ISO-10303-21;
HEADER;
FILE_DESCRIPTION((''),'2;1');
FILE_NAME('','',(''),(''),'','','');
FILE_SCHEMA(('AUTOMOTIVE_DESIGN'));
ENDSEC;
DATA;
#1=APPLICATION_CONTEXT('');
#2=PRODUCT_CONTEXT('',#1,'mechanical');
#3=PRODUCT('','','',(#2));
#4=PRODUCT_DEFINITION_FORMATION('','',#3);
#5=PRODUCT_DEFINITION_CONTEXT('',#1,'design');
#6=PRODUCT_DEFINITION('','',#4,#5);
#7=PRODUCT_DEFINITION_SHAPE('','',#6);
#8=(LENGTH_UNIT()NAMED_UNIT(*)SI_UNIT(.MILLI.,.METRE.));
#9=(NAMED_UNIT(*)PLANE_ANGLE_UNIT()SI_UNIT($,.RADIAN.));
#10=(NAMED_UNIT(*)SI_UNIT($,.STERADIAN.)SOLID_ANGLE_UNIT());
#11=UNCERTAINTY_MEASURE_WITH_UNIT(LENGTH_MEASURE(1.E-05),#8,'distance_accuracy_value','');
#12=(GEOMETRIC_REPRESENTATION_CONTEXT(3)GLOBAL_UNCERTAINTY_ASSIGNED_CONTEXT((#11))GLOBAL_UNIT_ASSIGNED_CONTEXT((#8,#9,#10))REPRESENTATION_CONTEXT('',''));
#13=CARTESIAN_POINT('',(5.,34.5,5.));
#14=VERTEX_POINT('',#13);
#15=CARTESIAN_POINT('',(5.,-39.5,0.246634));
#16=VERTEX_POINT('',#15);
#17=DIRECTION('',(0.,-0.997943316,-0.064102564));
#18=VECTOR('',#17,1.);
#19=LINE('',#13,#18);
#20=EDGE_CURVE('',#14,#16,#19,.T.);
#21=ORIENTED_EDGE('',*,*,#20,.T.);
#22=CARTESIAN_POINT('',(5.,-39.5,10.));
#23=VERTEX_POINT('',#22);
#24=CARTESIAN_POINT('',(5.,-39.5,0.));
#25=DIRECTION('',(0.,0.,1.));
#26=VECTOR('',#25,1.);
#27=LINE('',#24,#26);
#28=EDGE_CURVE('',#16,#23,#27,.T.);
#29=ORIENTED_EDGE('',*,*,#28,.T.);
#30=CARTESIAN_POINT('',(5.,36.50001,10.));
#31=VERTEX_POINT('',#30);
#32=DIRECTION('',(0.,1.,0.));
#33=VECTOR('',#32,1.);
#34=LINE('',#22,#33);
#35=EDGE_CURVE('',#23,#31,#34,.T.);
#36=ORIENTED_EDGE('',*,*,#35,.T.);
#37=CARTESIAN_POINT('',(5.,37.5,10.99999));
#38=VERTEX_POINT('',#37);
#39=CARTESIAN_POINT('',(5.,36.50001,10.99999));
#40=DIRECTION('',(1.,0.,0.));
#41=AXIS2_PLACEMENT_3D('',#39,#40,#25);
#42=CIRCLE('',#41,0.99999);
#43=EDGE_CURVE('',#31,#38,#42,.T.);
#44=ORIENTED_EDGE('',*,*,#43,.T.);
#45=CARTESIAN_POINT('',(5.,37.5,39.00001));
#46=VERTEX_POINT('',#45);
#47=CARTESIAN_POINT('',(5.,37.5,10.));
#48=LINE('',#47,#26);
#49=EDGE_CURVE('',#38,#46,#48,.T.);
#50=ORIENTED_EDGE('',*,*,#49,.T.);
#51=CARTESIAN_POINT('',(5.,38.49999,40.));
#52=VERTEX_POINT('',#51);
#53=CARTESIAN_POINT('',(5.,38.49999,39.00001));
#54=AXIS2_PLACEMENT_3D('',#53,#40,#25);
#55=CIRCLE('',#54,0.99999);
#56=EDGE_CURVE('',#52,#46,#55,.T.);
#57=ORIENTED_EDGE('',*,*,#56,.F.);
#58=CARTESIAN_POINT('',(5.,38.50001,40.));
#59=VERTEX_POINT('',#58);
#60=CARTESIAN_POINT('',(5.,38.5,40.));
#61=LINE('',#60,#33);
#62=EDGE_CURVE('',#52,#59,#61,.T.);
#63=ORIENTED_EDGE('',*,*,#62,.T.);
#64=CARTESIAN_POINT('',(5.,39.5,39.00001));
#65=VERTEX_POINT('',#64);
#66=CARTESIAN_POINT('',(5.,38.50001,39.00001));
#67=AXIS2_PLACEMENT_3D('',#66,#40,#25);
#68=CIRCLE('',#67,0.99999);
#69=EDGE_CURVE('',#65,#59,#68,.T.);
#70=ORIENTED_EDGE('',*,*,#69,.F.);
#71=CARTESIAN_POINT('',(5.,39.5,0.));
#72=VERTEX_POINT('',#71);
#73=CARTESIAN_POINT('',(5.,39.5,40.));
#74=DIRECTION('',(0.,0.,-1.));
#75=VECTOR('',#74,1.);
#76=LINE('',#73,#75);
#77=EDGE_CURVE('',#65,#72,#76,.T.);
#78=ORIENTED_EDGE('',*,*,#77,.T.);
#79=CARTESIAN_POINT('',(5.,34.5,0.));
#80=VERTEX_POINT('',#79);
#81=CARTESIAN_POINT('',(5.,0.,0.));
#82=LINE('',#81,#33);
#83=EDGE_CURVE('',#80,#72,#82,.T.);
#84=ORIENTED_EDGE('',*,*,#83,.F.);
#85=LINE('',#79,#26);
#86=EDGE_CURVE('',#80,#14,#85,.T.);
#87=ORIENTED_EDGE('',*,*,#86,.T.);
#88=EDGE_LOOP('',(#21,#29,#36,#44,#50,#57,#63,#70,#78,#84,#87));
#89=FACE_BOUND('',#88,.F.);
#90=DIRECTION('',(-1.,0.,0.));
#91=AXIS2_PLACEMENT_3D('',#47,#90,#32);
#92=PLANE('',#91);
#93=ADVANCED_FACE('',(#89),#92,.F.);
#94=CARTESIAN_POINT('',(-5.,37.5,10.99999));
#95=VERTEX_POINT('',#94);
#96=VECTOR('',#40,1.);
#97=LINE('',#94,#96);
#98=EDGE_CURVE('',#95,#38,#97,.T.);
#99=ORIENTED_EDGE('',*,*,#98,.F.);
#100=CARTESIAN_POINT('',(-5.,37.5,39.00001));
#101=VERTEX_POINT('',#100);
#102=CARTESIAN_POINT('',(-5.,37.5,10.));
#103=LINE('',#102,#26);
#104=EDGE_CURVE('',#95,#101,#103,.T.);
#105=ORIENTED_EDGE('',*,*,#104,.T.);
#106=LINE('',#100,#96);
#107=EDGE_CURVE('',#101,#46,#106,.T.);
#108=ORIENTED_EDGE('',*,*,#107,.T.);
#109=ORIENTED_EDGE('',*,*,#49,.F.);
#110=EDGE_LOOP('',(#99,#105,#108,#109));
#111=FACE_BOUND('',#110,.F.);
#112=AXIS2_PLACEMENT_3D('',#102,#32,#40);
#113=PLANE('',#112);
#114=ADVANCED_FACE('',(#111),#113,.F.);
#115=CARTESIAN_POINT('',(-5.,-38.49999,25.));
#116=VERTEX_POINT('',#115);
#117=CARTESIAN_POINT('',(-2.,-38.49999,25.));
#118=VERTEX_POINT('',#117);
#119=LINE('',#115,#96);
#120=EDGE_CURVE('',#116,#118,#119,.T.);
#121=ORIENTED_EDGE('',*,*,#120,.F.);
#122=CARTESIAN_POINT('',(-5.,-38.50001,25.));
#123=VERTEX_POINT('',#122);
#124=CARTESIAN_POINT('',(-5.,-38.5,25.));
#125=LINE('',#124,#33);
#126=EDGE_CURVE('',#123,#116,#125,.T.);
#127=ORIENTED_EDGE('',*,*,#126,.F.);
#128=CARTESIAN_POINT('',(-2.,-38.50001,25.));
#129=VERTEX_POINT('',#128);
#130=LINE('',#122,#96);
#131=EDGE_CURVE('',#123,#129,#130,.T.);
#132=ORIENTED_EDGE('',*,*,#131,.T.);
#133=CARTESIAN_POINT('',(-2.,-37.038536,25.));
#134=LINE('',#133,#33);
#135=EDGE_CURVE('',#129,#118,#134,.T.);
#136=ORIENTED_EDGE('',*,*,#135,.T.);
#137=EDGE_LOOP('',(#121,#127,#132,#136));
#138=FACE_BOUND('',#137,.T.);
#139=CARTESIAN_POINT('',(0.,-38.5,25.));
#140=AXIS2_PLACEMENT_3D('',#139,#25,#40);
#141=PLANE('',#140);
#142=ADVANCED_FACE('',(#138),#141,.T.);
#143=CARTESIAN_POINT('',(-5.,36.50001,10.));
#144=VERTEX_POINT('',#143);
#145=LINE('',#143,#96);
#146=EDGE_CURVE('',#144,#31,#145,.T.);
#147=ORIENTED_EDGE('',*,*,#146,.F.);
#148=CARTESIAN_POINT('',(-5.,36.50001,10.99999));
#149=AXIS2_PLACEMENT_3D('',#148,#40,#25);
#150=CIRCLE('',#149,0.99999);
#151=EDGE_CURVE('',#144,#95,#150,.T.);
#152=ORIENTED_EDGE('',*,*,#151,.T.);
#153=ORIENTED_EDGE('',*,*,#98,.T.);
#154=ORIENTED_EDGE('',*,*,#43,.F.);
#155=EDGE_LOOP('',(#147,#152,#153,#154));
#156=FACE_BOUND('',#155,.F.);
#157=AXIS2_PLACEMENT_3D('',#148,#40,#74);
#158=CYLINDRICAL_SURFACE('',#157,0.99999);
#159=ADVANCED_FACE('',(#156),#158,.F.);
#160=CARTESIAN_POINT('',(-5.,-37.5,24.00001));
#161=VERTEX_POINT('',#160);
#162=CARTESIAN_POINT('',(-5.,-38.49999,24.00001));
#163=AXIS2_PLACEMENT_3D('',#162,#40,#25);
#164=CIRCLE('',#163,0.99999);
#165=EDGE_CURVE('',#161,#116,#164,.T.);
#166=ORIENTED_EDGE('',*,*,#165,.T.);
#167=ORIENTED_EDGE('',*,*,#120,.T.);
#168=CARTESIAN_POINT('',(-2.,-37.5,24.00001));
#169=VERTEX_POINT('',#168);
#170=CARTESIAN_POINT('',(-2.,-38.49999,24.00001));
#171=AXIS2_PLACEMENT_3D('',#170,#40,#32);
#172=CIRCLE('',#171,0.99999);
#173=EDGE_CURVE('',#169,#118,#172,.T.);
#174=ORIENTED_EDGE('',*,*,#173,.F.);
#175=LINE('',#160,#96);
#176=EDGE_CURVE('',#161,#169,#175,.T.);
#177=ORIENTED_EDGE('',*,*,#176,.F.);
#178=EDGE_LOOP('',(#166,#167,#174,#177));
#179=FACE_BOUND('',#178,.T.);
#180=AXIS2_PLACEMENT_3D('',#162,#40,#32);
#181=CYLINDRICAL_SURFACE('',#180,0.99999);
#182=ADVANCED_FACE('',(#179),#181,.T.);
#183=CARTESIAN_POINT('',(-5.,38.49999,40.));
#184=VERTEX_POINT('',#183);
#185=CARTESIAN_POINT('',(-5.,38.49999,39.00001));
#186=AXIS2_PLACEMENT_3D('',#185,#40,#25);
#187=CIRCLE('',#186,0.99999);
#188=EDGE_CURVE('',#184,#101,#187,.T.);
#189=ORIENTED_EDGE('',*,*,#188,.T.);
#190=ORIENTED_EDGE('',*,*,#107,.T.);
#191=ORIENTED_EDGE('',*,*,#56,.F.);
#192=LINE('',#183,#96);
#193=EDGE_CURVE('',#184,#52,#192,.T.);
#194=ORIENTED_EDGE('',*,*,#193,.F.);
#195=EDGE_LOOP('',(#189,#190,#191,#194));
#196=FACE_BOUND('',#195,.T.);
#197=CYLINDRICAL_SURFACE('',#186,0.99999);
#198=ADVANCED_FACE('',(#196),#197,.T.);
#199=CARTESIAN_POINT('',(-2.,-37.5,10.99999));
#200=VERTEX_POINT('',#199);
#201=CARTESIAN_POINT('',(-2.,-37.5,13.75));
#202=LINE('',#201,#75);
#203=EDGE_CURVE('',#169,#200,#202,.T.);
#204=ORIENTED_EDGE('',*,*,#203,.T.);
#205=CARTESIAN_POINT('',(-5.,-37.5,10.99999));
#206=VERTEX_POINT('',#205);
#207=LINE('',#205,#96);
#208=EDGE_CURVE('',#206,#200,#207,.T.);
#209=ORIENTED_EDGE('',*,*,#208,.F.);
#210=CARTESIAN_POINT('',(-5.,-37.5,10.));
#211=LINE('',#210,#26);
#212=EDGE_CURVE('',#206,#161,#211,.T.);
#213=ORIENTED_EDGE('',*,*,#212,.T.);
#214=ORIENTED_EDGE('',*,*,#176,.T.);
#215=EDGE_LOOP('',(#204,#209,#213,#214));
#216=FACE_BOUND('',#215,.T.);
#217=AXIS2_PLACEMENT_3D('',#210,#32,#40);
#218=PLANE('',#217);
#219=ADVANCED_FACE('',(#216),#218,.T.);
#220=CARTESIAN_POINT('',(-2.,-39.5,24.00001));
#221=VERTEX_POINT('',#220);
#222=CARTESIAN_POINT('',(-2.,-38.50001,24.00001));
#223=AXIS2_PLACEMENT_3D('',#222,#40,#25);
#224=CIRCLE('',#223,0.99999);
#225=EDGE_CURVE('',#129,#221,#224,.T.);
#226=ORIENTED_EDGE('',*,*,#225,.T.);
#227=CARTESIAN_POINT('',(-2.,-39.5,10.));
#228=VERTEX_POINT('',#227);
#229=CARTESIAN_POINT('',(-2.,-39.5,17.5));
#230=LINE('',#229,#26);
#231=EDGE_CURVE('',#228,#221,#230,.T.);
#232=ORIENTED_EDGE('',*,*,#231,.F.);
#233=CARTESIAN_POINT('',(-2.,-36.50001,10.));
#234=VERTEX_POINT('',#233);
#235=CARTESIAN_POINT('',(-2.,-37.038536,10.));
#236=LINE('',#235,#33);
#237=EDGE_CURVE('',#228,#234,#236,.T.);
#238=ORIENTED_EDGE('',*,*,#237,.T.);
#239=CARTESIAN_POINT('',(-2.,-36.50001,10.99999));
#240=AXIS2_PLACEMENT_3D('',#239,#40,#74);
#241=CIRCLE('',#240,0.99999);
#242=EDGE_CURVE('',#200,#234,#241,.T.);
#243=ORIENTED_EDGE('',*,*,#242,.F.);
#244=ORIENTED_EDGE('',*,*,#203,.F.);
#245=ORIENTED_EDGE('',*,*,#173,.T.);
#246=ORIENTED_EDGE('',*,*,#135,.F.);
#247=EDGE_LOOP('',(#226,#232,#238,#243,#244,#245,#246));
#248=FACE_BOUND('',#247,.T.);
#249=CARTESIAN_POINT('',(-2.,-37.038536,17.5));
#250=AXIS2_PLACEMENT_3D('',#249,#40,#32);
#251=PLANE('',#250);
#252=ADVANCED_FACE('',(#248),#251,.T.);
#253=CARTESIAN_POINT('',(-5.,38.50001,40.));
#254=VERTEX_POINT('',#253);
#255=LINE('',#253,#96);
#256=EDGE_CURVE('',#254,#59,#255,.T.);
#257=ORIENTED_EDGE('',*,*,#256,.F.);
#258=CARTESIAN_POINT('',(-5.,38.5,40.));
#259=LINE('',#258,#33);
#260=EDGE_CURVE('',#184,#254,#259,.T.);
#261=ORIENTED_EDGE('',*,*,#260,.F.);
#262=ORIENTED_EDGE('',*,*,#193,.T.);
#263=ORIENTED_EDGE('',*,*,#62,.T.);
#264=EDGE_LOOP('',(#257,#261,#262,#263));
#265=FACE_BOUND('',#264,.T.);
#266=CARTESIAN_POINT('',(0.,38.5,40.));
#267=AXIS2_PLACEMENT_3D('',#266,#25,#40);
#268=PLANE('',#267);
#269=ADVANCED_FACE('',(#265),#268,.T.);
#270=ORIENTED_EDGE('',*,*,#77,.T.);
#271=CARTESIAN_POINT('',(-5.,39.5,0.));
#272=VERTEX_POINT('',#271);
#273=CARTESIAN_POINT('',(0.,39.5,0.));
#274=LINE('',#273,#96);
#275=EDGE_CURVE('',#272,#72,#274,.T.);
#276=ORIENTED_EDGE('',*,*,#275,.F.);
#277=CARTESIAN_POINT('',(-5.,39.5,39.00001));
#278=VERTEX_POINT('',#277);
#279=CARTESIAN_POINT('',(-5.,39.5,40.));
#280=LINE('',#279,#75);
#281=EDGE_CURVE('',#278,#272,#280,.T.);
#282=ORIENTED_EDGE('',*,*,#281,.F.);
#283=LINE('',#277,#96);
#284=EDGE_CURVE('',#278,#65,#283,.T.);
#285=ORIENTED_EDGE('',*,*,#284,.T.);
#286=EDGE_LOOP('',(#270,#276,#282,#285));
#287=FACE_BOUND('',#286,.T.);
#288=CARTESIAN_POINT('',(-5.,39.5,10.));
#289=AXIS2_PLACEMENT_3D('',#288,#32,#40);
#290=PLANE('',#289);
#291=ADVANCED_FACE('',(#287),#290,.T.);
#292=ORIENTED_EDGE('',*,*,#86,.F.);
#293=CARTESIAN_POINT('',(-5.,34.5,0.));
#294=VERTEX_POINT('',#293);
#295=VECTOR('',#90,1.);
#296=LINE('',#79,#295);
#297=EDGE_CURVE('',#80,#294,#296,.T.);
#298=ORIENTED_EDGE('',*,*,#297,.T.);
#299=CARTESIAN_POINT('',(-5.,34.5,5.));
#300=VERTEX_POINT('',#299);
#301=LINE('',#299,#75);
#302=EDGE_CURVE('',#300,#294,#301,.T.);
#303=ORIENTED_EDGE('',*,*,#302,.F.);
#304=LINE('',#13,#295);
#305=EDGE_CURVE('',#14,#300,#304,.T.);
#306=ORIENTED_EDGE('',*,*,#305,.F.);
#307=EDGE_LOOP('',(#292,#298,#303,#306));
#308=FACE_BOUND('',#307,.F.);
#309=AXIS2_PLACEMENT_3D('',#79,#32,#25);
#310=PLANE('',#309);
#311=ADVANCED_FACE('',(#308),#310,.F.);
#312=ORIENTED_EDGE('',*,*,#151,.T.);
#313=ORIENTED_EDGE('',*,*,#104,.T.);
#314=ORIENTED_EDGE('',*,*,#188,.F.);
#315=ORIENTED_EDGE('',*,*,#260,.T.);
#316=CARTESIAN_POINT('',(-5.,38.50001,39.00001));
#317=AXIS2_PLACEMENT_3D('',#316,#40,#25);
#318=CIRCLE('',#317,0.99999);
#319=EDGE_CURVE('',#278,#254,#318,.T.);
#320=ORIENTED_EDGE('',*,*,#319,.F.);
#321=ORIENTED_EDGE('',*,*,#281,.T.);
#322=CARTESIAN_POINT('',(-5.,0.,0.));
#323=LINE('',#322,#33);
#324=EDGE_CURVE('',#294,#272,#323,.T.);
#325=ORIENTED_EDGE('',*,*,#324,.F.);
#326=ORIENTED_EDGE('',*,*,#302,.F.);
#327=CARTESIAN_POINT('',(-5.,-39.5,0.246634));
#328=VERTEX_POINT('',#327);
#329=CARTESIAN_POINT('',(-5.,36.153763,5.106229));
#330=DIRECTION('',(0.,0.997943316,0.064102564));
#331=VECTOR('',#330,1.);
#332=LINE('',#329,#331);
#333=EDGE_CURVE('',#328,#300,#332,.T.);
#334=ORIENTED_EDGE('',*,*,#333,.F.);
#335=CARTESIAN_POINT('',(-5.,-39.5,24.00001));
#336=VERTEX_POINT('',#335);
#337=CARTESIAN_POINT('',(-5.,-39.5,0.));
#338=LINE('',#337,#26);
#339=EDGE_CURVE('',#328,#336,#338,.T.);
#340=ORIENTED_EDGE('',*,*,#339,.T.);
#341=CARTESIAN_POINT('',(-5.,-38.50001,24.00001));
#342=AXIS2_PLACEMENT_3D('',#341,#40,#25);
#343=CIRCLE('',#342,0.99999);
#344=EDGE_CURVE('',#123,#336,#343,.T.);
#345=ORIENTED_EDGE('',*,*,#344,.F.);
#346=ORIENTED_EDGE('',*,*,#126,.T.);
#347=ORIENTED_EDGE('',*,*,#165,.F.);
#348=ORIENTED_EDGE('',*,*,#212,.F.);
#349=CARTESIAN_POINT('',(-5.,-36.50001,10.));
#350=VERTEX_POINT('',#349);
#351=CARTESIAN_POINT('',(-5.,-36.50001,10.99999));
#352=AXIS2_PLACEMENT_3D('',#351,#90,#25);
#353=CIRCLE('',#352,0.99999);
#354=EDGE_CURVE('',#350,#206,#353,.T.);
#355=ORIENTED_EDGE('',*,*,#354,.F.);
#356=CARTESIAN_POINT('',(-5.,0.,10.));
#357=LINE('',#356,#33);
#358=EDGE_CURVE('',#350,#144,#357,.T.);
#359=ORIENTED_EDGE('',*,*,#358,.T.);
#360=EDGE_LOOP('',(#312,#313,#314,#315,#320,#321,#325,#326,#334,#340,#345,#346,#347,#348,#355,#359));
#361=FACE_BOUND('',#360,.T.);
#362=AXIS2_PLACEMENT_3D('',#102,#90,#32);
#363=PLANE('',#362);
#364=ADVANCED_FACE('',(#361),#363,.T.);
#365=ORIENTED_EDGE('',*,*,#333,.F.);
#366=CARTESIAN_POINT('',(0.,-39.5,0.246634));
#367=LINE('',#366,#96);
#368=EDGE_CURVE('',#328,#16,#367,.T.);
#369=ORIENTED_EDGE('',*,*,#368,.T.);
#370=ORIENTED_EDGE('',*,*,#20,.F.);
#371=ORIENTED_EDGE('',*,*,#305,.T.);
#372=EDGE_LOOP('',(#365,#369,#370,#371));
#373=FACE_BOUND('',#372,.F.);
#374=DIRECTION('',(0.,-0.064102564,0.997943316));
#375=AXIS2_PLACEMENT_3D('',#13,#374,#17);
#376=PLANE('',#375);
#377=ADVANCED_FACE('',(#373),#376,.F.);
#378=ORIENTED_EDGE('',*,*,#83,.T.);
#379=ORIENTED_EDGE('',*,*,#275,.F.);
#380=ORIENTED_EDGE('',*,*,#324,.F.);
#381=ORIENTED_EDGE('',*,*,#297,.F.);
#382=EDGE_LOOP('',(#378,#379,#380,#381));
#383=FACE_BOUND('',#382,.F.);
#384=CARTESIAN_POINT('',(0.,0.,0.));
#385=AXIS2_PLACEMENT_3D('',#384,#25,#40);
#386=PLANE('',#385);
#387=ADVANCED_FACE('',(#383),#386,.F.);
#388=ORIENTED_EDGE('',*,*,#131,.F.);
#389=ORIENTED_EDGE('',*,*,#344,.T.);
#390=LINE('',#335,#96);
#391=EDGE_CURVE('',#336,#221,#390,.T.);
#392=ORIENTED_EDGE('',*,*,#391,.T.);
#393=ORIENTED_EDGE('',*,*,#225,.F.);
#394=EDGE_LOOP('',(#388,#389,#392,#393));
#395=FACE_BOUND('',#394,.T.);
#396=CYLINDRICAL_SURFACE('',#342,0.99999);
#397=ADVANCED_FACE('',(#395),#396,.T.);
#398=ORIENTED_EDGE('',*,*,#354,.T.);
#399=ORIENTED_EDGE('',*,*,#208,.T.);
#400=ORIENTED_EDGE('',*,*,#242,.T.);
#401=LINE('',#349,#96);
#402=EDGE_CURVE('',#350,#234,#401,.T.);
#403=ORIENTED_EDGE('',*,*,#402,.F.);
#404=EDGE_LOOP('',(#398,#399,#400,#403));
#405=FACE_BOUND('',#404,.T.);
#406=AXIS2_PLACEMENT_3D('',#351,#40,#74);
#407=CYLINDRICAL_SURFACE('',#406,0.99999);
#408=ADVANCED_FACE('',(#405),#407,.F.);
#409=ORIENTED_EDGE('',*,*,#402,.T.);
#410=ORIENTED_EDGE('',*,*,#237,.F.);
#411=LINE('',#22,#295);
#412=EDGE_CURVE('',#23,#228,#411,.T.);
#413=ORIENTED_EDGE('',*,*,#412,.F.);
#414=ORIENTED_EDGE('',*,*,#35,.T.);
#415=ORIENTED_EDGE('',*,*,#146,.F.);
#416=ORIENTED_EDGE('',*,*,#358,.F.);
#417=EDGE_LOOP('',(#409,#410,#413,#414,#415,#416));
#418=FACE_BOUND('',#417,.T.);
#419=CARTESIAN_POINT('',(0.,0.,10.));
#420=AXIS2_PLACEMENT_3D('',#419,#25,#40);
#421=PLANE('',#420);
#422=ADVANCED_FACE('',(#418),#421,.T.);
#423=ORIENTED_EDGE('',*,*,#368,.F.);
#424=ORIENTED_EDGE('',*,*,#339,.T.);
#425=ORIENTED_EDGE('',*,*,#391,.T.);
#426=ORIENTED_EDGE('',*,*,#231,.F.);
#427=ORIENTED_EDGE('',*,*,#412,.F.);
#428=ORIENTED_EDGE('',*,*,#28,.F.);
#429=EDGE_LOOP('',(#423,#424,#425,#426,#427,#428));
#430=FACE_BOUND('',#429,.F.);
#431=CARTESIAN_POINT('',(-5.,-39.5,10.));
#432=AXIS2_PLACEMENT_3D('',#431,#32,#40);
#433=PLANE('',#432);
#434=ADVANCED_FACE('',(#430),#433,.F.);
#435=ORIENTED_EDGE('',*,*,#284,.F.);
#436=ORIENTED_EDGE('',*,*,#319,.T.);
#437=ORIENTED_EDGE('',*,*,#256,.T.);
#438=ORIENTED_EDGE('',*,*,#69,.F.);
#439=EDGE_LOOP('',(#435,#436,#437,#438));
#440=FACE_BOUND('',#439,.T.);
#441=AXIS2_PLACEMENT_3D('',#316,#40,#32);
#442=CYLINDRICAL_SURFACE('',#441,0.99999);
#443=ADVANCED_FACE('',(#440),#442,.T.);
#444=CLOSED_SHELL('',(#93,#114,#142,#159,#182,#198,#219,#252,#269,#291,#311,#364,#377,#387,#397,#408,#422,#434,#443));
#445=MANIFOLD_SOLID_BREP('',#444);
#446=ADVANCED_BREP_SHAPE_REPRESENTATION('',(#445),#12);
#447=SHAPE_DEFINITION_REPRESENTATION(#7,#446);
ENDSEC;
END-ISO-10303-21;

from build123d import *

# Parameters (mm, degrees)
F0_W      = 10
F0_H      = 79
F1_DEPTH  = 10
F2_W      = 10
F2_H      = 2
F3_DEPTH  = 15
F4_W      = 10
F4_H      = 2
F5_DEPTH  = 30
F7_DEPTH  = 10.001
F8_R      = 0.99999
F9_W      = 4.9229283333
F9_H      = 15
F10_DEPTH = 7


# Not quite as in the source:
# - a fillet or chamfer is up to 0.001 mm smaller than in the source, because OpenCascade refuses the exact size


with BuildPart() as f1:
    # F0 (on Top) → F1 (new body)
    with BuildSketch(Plane.XY):
        Rectangle(F0_W, F0_H)
    extrude(amount=F1_DEPTH)

    # F2 (on face) → F3 (join)
    with BuildSketch(Plane.XY.offset(10)):
        with Locations((0, -38.5)):
            Rectangle(F2_W, F2_H)
    extrude(amount=F3_DEPTH)

    # F4 (on face) → F5 (join)
    with BuildSketch(Plane.XY.offset(10)):
        with Locations((0, 38.5)):
            Rectangle(F4_W, F4_H)
    extrude(amount=F5_DEPTH)

    # F6 (on face) → F7 (cut, through all)
    with BuildSketch(Plane.YZ.offset(5)):
        Polygon((34.5, 5), (-43.3395786217, 0), (34.5, 0), align=None)
    extrude(amount=-F7_DEPTH, mode=Mode.SUBTRACT)

    # F8 (radius 1 in the source; OpenCascade refuses exactly that, so slightly less here)
    f8_edges = [f1.edges().sort_by_distance(p)[0] for p in [
        (0, -39.5, 25),
        (0, -37.5, 25),
        (0, 37.5, 40),
        (0, 39.5, 40),
        (0, -37.5, 10),
        (0, 37.5, 10),
    ]]
    fillet(f8_edges, radius=F8_R)

    # F9 (on face) → F10 (cut)
    with BuildSketch(Plane.YZ.offset(5)):
        with Locations((-37.0385358334, 17.5)):
            Rectangle(F9_W, F9_H)
    extrude(amount=-F10_DEPTH, mode=Mode.SUBTRACT)


solid = f1.part
